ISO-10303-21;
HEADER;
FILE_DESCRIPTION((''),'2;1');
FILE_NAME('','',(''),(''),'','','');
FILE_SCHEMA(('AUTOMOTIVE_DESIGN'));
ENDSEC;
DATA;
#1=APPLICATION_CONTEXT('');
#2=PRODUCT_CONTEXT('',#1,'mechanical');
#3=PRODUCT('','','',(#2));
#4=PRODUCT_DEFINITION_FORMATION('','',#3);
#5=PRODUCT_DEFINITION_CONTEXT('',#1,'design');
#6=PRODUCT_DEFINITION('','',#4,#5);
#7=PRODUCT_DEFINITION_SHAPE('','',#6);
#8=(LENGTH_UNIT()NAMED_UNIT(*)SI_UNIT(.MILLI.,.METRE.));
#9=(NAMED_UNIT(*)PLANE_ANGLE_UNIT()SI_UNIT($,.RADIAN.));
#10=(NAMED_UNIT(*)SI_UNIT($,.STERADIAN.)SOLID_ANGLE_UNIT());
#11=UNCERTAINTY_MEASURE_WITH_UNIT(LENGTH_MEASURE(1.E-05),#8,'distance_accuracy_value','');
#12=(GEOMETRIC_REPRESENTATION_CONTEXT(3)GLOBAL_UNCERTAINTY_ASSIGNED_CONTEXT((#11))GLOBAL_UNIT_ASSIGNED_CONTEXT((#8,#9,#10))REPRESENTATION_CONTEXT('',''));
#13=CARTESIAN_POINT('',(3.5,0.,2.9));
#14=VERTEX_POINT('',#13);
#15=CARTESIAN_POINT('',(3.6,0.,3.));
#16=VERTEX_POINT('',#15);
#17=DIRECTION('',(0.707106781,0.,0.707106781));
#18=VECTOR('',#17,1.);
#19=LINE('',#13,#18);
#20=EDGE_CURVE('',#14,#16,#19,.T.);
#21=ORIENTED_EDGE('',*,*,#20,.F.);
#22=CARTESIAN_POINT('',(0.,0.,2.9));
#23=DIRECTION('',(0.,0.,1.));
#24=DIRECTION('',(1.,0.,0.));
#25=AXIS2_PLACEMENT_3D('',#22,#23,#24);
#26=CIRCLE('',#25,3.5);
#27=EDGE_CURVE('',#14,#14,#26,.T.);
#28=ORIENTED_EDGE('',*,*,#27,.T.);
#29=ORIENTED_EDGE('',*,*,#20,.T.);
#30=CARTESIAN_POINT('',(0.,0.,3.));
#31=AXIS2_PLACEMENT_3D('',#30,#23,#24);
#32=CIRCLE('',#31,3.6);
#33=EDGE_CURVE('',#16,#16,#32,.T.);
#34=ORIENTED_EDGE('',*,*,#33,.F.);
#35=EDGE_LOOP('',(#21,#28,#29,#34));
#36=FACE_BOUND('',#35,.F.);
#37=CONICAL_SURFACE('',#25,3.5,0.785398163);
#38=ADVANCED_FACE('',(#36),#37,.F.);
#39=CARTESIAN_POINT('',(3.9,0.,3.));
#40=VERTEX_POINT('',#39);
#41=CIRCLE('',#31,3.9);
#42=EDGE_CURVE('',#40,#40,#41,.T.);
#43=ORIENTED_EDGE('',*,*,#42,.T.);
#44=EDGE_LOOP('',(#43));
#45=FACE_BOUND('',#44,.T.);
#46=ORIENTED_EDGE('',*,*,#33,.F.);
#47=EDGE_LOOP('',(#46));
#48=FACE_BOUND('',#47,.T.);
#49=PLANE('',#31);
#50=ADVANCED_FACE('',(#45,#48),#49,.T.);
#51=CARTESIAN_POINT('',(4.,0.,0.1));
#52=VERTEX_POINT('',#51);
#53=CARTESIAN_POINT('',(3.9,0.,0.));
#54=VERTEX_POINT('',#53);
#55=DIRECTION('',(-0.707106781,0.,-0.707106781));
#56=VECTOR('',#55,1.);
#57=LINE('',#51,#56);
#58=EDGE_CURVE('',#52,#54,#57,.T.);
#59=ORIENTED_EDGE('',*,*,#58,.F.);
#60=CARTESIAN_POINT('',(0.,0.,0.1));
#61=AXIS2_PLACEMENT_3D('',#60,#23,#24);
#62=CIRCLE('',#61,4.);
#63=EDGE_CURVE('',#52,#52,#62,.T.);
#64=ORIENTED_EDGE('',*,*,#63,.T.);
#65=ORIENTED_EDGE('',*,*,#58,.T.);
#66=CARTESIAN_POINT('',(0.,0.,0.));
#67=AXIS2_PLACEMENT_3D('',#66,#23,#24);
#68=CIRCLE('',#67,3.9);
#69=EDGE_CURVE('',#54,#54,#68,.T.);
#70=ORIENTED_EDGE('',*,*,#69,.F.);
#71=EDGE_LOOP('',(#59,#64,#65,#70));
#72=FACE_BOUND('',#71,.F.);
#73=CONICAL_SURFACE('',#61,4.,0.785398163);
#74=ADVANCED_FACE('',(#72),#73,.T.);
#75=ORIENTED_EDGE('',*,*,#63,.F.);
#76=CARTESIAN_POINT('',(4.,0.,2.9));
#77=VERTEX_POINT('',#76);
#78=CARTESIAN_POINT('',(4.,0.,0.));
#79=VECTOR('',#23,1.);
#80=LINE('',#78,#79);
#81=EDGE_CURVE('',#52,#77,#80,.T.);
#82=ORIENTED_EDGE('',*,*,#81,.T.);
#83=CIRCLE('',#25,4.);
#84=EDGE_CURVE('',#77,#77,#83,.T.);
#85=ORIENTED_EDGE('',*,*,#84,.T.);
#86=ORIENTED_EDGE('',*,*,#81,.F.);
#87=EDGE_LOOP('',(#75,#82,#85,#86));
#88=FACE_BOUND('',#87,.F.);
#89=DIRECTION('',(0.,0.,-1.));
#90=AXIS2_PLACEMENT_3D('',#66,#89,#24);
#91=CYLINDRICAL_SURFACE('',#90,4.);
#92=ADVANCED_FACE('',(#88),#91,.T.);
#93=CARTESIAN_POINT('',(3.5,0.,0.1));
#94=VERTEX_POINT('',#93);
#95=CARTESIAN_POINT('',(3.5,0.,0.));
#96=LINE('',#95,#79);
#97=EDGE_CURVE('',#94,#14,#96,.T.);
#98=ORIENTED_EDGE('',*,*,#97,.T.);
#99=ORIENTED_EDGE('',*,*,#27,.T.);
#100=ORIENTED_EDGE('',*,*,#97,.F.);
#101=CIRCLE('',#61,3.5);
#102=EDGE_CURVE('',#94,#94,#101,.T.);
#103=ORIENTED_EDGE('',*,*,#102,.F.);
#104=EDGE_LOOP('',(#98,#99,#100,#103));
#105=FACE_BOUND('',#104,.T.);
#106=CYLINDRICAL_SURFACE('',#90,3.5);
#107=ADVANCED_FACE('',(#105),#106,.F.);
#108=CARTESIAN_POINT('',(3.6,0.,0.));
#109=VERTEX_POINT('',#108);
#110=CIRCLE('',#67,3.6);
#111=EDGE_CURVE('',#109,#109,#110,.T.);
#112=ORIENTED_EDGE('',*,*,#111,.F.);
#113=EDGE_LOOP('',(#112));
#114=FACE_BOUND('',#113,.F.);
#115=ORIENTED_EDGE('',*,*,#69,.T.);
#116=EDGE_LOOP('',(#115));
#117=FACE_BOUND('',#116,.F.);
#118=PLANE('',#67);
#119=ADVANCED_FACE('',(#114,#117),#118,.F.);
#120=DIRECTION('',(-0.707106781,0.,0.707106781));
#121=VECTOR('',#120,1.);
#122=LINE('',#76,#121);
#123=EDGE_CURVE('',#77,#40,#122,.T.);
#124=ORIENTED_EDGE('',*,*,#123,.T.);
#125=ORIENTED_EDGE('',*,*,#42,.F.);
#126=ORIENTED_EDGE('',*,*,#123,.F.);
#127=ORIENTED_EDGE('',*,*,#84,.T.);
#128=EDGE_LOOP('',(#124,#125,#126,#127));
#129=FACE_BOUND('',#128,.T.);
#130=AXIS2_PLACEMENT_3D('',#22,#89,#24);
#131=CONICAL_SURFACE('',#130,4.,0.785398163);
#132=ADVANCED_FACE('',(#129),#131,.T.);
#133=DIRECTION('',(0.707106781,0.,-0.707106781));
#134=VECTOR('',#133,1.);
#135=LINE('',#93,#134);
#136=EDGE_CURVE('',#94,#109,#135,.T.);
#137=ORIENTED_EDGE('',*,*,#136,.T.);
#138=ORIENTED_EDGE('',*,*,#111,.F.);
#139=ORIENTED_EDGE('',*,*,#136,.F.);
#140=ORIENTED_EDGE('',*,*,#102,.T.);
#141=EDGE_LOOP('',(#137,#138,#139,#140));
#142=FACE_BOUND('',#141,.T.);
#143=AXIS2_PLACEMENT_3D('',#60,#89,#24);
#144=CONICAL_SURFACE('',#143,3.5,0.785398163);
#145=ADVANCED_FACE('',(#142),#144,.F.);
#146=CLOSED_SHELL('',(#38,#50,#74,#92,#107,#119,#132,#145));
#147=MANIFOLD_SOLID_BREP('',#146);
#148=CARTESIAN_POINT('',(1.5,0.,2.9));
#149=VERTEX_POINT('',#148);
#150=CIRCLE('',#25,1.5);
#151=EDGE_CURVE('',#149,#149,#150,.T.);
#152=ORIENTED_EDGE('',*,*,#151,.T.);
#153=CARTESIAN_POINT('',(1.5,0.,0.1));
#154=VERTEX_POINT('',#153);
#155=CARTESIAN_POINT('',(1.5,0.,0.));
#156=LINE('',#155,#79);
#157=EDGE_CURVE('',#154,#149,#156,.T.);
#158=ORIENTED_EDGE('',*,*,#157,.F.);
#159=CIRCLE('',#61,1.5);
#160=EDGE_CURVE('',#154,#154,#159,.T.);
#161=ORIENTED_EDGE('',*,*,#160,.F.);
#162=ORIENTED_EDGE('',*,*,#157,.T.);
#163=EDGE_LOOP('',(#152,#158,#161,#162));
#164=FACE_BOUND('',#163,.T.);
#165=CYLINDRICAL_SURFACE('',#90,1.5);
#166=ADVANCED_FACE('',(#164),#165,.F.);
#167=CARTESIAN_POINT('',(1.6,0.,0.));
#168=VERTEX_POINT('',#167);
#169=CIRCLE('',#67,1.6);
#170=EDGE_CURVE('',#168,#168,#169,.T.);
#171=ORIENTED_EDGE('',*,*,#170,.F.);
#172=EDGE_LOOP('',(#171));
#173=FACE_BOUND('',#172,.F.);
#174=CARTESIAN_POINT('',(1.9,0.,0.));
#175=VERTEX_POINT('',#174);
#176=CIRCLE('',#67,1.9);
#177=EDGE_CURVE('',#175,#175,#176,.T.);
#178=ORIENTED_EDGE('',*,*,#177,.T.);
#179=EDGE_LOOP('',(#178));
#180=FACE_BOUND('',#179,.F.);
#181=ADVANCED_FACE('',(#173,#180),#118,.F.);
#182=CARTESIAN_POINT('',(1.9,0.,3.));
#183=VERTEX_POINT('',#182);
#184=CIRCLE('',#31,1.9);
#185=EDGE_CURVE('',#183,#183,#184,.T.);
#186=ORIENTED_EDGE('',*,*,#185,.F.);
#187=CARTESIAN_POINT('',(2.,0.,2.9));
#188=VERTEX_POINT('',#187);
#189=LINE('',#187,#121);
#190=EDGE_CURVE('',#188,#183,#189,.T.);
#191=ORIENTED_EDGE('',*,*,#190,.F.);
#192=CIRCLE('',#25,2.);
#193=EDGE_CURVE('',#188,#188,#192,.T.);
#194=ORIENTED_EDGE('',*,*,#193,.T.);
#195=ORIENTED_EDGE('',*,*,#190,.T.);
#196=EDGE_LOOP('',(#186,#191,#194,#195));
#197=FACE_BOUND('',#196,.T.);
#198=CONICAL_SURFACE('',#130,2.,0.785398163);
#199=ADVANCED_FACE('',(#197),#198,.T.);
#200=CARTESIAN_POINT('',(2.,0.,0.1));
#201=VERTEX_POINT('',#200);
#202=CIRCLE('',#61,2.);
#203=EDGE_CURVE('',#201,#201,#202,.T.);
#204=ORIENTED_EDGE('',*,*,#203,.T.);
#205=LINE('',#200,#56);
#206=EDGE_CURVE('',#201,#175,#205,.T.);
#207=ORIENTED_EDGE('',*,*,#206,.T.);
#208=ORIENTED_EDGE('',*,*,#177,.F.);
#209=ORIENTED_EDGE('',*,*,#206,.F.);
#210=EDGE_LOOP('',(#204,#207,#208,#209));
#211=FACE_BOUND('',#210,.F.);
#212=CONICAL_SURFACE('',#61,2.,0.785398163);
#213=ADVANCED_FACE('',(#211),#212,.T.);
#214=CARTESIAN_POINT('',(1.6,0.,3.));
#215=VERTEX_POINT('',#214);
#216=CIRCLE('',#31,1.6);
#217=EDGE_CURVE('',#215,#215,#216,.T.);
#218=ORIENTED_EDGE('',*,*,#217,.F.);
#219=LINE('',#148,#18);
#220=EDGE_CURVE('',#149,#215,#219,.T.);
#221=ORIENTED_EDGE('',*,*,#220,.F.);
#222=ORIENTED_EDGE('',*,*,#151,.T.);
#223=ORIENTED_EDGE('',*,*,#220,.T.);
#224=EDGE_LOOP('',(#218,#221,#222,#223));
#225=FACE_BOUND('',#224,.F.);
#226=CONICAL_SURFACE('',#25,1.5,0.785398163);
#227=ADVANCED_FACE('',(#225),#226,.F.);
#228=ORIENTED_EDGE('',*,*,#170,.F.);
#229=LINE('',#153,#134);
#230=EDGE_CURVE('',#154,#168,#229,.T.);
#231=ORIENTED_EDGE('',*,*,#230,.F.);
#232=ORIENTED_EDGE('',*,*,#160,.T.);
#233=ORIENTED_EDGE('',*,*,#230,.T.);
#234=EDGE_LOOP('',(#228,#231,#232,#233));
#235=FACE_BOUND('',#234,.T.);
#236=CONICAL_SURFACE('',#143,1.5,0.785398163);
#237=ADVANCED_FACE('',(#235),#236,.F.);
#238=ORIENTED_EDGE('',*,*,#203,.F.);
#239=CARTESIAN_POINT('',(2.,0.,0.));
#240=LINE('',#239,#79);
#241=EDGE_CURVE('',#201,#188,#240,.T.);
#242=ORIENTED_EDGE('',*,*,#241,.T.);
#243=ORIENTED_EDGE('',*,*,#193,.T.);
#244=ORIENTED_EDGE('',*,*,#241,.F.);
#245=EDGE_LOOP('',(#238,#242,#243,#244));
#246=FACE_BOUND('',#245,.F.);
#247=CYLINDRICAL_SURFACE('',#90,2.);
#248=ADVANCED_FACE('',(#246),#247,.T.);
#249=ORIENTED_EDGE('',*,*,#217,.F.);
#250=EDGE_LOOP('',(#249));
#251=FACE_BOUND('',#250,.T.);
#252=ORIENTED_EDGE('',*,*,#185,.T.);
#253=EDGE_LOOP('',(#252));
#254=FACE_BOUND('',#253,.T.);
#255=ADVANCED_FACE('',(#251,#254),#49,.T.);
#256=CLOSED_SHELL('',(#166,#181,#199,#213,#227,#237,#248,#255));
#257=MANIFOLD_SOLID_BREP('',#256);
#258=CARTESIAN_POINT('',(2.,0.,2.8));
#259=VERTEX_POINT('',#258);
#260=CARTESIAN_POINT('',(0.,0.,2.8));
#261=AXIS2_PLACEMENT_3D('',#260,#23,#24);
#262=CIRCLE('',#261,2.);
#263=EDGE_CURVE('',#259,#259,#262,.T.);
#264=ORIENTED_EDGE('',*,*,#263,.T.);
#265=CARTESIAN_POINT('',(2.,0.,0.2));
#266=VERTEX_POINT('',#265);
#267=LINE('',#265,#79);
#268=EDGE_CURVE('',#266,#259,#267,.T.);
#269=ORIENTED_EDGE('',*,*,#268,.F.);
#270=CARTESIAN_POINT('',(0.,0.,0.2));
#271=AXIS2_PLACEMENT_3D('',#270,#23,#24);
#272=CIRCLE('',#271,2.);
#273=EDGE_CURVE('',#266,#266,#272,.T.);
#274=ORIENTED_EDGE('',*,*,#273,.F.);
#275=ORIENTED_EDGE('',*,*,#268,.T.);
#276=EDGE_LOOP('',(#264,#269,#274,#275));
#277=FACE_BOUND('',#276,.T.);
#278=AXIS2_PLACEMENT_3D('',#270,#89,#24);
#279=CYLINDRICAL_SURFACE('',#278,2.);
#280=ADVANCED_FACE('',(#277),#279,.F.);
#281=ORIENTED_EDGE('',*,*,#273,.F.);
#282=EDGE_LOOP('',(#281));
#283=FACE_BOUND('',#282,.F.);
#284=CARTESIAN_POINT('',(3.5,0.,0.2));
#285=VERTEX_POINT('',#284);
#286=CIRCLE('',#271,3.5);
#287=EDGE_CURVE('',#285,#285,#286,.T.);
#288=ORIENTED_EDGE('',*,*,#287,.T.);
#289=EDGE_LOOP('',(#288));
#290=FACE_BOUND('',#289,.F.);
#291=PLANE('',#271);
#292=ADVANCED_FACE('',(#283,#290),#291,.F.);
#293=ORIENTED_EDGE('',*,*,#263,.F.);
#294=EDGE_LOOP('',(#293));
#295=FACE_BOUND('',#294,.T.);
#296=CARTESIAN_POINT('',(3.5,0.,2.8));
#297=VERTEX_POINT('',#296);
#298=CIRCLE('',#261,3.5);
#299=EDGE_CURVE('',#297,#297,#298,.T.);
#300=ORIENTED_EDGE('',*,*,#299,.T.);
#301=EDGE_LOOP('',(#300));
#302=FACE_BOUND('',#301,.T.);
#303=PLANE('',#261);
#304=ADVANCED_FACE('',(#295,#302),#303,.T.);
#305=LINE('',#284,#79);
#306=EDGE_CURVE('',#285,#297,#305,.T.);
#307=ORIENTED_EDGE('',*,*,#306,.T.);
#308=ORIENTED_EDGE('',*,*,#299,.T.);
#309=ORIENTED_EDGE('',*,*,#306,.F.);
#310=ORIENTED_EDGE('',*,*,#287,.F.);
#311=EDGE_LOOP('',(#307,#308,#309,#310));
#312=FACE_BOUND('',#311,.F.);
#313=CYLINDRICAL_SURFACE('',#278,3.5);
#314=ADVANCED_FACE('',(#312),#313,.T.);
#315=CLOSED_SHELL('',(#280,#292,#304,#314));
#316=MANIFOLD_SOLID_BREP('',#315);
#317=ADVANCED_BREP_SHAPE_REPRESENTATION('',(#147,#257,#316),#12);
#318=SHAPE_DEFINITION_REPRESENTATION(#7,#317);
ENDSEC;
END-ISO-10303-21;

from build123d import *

# Parameters (mm, degrees)
F0_R      = 2
F0_R_2    = 1.5
F1_DEPTH  = 3
F0_R_3    = 4
F0_R_4    = 3.5
F2_START  = 0.2
F2_DEPTH  = 2.6
F3_SIZE   = 0.1
F3_2_SIZE = 0.1


with BuildPart() as f1:
    # F0 (on Top) → F1 (new body)
    with BuildSketch(Plane.XY):
        Circle(F0_R)
        Circle(F0_R_2, mode=Mode.SUBTRACT)
    extrude(amount=F1_DEPTH)

    # F3
    f3_edges = [f1.edges().sort_by_distance(p)[0] for p in [
        (-2, 0, 0),
        (-1.5, 0, 0),
        (-2, 0, 3),
        (-1.5, 0, 3),
    ]]
    chamfer(f3_edges, length=F3_SIZE)


with BuildPart() as f1b:
    # F0 (on Top) → F1, piece 2 (new body)
    with BuildSketch(Plane.XY):
        Circle(F0_R_3)
        Circle(F0_R_4, mode=Mode.SUBTRACT)
    extrude(amount=F1_DEPTH)

    # F3#2
    f3_2_edges = [f1b.edges().sort_by_distance(p)[0] for p in [
        (-4, 0, 3),
        (-3.5, 0, 3),
        (-4, 0, 0),
        (-3.5, 0, 0),
    ]]
    chamfer(f3_2_edges, length=F3_2_SIZE)


with BuildPart() as f2:
    # F0 (on Top) → F2 (new body)
    with BuildSketch(Plane.XY.offset(F2_START)):
        Circle(F0_R_4)
        Circle(F0_R, mode=Mode.SUBTRACT)
    extrude(amount=F2_DEPTH)


solid = Compound([f1.part, f1b.part, f2.part])
